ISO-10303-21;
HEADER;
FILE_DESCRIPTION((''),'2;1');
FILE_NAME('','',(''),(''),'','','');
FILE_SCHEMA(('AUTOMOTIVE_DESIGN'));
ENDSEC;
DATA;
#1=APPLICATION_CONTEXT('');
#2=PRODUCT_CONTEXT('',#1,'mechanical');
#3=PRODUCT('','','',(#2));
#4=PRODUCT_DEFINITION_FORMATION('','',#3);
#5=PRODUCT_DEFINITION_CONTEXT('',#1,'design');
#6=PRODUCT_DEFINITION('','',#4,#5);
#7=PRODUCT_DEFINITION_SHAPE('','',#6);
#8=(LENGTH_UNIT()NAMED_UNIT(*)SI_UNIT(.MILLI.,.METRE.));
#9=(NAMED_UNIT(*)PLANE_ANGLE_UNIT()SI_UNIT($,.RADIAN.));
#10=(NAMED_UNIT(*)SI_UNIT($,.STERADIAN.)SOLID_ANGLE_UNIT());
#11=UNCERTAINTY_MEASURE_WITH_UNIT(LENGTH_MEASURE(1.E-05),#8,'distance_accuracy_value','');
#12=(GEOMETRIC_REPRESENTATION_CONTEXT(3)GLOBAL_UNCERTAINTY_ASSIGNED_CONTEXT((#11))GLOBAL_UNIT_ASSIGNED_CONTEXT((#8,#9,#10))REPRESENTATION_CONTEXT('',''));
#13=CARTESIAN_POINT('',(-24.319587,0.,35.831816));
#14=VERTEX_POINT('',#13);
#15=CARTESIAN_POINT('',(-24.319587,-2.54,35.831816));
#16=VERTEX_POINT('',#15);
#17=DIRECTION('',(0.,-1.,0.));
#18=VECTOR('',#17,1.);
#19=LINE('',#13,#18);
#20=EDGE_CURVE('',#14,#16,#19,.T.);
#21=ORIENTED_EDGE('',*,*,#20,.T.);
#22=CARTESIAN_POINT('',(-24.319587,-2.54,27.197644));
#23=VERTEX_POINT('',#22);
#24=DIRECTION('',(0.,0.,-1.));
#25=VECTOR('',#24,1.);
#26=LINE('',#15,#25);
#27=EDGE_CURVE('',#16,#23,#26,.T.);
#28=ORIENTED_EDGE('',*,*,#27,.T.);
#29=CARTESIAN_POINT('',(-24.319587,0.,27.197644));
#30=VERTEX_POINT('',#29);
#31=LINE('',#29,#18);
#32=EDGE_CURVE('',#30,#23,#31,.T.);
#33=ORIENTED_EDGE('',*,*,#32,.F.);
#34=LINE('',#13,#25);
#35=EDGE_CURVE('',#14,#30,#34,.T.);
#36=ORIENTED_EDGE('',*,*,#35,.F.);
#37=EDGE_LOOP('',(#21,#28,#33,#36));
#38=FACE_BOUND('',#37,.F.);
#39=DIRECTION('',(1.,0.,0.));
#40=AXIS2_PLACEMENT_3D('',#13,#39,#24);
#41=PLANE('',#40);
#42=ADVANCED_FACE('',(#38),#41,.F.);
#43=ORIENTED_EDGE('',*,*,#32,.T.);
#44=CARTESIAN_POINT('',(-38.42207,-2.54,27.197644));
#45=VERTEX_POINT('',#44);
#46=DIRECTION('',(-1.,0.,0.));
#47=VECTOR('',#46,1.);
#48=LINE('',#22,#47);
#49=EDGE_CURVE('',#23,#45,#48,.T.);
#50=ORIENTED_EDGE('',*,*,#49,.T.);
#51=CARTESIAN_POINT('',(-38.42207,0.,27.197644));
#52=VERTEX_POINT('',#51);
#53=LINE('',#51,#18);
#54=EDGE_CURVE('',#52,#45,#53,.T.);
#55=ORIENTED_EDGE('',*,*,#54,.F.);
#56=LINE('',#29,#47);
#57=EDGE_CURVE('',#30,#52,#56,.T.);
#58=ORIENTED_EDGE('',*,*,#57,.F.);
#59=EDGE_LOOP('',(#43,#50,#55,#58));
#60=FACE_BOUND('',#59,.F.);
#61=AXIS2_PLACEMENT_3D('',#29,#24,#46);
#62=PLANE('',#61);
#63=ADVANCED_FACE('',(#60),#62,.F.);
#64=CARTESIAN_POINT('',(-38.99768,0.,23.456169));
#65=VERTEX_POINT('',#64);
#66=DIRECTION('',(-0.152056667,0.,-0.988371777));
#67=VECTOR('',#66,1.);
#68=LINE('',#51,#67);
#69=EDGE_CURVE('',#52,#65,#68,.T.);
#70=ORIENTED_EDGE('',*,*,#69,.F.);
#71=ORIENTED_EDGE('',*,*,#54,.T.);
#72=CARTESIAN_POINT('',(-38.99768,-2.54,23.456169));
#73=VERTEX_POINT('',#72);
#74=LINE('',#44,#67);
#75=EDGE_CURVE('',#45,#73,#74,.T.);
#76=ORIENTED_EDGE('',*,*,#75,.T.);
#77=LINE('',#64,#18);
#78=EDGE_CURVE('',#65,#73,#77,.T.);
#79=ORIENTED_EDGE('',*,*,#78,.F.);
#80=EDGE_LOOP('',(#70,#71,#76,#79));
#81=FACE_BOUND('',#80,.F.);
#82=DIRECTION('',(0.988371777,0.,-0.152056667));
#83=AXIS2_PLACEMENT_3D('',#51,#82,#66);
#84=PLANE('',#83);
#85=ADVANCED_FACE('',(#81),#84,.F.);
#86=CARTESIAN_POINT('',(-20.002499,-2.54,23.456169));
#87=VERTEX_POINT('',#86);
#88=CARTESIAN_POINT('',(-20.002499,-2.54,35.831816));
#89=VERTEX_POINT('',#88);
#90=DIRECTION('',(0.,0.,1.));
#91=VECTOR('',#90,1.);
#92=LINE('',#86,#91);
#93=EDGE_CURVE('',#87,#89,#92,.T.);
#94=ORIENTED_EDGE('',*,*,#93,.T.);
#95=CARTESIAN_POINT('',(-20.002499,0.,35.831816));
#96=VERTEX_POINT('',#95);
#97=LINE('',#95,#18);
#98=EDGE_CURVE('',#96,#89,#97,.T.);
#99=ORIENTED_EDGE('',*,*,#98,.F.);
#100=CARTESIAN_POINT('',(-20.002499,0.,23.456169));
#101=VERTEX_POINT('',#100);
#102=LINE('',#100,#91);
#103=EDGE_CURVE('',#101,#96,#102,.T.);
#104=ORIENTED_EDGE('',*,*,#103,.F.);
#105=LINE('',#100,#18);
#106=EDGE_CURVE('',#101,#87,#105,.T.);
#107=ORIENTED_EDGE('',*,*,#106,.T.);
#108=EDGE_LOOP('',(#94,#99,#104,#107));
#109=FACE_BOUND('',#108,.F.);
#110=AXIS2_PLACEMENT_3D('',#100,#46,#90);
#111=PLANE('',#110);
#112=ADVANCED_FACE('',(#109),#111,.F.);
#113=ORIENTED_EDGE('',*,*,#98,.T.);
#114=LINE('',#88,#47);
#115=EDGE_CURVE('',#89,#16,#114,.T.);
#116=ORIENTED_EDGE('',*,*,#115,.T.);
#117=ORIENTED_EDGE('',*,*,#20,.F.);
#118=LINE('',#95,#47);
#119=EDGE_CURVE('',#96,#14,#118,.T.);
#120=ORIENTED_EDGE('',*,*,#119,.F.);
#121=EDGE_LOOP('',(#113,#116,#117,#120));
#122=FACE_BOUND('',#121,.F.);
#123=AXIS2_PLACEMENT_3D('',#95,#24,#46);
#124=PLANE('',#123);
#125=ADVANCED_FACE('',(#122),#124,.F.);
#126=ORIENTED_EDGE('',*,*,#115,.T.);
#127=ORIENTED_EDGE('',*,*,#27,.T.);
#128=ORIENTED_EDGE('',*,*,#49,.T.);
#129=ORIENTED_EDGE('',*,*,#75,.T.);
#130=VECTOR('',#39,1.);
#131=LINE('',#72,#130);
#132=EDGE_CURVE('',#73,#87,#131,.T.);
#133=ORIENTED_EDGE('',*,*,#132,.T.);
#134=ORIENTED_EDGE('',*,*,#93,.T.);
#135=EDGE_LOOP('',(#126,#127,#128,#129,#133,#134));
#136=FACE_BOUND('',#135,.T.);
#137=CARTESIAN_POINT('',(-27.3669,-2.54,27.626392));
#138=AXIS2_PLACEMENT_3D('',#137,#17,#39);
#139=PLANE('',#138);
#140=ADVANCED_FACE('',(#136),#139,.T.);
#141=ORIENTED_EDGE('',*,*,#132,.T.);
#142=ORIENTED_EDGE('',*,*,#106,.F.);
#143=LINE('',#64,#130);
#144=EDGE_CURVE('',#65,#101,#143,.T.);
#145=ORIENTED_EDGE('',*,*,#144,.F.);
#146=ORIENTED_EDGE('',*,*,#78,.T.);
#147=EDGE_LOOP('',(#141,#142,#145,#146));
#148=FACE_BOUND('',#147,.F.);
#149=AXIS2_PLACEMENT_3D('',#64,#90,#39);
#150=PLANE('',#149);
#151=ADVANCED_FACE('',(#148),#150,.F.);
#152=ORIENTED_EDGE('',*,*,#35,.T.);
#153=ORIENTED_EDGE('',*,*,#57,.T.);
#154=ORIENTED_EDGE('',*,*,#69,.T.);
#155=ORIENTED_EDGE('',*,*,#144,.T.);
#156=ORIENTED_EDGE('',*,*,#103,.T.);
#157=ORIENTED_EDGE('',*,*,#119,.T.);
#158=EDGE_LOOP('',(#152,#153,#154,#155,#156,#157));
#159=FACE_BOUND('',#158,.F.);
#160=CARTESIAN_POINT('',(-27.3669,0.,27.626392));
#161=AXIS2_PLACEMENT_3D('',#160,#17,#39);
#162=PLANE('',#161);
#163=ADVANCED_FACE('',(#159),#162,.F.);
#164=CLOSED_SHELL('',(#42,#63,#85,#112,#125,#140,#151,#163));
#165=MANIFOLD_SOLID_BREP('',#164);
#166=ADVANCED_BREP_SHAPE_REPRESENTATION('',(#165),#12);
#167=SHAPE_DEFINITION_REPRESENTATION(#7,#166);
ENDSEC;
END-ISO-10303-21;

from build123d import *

# Parameters (mm, degrees)
F1_DEPTH = 2.54
F2_R     = 2.6712032827
F3_DEPTH = 2.54


# Not quite as in the source:
# - the program builds the solid bodies; features that only make, move or delete a surface that nothing else refers to are left out


with BuildPart() as f1:
    # F0 (on Front) → F1 (new body)
    with BuildSketch(Plane.XZ):
        Polygon((-38.4220704436, 27.1976441145), (-38.9976799488, 23.4561692923), (-20.0024992228, 23.4561692923), (-20.0024992228, 35.8318164945), (-24.3195872754, 35.8318164945), (-24.3195872754, 31.2269236892), (-24.3195872754, 27.1976441145), align=None)
    extrude(amount=F1_DEPTH)

    # F2 (on Right) → F3 (cut)
    with BuildSketch(Plane.YZ):
        with Locations((0, 48.1319762766)):
            Circle(F2_R)
    extrude(amount=-F3_DEPTH, mode=Mode.SUBTRACT)


solid = f1.part
